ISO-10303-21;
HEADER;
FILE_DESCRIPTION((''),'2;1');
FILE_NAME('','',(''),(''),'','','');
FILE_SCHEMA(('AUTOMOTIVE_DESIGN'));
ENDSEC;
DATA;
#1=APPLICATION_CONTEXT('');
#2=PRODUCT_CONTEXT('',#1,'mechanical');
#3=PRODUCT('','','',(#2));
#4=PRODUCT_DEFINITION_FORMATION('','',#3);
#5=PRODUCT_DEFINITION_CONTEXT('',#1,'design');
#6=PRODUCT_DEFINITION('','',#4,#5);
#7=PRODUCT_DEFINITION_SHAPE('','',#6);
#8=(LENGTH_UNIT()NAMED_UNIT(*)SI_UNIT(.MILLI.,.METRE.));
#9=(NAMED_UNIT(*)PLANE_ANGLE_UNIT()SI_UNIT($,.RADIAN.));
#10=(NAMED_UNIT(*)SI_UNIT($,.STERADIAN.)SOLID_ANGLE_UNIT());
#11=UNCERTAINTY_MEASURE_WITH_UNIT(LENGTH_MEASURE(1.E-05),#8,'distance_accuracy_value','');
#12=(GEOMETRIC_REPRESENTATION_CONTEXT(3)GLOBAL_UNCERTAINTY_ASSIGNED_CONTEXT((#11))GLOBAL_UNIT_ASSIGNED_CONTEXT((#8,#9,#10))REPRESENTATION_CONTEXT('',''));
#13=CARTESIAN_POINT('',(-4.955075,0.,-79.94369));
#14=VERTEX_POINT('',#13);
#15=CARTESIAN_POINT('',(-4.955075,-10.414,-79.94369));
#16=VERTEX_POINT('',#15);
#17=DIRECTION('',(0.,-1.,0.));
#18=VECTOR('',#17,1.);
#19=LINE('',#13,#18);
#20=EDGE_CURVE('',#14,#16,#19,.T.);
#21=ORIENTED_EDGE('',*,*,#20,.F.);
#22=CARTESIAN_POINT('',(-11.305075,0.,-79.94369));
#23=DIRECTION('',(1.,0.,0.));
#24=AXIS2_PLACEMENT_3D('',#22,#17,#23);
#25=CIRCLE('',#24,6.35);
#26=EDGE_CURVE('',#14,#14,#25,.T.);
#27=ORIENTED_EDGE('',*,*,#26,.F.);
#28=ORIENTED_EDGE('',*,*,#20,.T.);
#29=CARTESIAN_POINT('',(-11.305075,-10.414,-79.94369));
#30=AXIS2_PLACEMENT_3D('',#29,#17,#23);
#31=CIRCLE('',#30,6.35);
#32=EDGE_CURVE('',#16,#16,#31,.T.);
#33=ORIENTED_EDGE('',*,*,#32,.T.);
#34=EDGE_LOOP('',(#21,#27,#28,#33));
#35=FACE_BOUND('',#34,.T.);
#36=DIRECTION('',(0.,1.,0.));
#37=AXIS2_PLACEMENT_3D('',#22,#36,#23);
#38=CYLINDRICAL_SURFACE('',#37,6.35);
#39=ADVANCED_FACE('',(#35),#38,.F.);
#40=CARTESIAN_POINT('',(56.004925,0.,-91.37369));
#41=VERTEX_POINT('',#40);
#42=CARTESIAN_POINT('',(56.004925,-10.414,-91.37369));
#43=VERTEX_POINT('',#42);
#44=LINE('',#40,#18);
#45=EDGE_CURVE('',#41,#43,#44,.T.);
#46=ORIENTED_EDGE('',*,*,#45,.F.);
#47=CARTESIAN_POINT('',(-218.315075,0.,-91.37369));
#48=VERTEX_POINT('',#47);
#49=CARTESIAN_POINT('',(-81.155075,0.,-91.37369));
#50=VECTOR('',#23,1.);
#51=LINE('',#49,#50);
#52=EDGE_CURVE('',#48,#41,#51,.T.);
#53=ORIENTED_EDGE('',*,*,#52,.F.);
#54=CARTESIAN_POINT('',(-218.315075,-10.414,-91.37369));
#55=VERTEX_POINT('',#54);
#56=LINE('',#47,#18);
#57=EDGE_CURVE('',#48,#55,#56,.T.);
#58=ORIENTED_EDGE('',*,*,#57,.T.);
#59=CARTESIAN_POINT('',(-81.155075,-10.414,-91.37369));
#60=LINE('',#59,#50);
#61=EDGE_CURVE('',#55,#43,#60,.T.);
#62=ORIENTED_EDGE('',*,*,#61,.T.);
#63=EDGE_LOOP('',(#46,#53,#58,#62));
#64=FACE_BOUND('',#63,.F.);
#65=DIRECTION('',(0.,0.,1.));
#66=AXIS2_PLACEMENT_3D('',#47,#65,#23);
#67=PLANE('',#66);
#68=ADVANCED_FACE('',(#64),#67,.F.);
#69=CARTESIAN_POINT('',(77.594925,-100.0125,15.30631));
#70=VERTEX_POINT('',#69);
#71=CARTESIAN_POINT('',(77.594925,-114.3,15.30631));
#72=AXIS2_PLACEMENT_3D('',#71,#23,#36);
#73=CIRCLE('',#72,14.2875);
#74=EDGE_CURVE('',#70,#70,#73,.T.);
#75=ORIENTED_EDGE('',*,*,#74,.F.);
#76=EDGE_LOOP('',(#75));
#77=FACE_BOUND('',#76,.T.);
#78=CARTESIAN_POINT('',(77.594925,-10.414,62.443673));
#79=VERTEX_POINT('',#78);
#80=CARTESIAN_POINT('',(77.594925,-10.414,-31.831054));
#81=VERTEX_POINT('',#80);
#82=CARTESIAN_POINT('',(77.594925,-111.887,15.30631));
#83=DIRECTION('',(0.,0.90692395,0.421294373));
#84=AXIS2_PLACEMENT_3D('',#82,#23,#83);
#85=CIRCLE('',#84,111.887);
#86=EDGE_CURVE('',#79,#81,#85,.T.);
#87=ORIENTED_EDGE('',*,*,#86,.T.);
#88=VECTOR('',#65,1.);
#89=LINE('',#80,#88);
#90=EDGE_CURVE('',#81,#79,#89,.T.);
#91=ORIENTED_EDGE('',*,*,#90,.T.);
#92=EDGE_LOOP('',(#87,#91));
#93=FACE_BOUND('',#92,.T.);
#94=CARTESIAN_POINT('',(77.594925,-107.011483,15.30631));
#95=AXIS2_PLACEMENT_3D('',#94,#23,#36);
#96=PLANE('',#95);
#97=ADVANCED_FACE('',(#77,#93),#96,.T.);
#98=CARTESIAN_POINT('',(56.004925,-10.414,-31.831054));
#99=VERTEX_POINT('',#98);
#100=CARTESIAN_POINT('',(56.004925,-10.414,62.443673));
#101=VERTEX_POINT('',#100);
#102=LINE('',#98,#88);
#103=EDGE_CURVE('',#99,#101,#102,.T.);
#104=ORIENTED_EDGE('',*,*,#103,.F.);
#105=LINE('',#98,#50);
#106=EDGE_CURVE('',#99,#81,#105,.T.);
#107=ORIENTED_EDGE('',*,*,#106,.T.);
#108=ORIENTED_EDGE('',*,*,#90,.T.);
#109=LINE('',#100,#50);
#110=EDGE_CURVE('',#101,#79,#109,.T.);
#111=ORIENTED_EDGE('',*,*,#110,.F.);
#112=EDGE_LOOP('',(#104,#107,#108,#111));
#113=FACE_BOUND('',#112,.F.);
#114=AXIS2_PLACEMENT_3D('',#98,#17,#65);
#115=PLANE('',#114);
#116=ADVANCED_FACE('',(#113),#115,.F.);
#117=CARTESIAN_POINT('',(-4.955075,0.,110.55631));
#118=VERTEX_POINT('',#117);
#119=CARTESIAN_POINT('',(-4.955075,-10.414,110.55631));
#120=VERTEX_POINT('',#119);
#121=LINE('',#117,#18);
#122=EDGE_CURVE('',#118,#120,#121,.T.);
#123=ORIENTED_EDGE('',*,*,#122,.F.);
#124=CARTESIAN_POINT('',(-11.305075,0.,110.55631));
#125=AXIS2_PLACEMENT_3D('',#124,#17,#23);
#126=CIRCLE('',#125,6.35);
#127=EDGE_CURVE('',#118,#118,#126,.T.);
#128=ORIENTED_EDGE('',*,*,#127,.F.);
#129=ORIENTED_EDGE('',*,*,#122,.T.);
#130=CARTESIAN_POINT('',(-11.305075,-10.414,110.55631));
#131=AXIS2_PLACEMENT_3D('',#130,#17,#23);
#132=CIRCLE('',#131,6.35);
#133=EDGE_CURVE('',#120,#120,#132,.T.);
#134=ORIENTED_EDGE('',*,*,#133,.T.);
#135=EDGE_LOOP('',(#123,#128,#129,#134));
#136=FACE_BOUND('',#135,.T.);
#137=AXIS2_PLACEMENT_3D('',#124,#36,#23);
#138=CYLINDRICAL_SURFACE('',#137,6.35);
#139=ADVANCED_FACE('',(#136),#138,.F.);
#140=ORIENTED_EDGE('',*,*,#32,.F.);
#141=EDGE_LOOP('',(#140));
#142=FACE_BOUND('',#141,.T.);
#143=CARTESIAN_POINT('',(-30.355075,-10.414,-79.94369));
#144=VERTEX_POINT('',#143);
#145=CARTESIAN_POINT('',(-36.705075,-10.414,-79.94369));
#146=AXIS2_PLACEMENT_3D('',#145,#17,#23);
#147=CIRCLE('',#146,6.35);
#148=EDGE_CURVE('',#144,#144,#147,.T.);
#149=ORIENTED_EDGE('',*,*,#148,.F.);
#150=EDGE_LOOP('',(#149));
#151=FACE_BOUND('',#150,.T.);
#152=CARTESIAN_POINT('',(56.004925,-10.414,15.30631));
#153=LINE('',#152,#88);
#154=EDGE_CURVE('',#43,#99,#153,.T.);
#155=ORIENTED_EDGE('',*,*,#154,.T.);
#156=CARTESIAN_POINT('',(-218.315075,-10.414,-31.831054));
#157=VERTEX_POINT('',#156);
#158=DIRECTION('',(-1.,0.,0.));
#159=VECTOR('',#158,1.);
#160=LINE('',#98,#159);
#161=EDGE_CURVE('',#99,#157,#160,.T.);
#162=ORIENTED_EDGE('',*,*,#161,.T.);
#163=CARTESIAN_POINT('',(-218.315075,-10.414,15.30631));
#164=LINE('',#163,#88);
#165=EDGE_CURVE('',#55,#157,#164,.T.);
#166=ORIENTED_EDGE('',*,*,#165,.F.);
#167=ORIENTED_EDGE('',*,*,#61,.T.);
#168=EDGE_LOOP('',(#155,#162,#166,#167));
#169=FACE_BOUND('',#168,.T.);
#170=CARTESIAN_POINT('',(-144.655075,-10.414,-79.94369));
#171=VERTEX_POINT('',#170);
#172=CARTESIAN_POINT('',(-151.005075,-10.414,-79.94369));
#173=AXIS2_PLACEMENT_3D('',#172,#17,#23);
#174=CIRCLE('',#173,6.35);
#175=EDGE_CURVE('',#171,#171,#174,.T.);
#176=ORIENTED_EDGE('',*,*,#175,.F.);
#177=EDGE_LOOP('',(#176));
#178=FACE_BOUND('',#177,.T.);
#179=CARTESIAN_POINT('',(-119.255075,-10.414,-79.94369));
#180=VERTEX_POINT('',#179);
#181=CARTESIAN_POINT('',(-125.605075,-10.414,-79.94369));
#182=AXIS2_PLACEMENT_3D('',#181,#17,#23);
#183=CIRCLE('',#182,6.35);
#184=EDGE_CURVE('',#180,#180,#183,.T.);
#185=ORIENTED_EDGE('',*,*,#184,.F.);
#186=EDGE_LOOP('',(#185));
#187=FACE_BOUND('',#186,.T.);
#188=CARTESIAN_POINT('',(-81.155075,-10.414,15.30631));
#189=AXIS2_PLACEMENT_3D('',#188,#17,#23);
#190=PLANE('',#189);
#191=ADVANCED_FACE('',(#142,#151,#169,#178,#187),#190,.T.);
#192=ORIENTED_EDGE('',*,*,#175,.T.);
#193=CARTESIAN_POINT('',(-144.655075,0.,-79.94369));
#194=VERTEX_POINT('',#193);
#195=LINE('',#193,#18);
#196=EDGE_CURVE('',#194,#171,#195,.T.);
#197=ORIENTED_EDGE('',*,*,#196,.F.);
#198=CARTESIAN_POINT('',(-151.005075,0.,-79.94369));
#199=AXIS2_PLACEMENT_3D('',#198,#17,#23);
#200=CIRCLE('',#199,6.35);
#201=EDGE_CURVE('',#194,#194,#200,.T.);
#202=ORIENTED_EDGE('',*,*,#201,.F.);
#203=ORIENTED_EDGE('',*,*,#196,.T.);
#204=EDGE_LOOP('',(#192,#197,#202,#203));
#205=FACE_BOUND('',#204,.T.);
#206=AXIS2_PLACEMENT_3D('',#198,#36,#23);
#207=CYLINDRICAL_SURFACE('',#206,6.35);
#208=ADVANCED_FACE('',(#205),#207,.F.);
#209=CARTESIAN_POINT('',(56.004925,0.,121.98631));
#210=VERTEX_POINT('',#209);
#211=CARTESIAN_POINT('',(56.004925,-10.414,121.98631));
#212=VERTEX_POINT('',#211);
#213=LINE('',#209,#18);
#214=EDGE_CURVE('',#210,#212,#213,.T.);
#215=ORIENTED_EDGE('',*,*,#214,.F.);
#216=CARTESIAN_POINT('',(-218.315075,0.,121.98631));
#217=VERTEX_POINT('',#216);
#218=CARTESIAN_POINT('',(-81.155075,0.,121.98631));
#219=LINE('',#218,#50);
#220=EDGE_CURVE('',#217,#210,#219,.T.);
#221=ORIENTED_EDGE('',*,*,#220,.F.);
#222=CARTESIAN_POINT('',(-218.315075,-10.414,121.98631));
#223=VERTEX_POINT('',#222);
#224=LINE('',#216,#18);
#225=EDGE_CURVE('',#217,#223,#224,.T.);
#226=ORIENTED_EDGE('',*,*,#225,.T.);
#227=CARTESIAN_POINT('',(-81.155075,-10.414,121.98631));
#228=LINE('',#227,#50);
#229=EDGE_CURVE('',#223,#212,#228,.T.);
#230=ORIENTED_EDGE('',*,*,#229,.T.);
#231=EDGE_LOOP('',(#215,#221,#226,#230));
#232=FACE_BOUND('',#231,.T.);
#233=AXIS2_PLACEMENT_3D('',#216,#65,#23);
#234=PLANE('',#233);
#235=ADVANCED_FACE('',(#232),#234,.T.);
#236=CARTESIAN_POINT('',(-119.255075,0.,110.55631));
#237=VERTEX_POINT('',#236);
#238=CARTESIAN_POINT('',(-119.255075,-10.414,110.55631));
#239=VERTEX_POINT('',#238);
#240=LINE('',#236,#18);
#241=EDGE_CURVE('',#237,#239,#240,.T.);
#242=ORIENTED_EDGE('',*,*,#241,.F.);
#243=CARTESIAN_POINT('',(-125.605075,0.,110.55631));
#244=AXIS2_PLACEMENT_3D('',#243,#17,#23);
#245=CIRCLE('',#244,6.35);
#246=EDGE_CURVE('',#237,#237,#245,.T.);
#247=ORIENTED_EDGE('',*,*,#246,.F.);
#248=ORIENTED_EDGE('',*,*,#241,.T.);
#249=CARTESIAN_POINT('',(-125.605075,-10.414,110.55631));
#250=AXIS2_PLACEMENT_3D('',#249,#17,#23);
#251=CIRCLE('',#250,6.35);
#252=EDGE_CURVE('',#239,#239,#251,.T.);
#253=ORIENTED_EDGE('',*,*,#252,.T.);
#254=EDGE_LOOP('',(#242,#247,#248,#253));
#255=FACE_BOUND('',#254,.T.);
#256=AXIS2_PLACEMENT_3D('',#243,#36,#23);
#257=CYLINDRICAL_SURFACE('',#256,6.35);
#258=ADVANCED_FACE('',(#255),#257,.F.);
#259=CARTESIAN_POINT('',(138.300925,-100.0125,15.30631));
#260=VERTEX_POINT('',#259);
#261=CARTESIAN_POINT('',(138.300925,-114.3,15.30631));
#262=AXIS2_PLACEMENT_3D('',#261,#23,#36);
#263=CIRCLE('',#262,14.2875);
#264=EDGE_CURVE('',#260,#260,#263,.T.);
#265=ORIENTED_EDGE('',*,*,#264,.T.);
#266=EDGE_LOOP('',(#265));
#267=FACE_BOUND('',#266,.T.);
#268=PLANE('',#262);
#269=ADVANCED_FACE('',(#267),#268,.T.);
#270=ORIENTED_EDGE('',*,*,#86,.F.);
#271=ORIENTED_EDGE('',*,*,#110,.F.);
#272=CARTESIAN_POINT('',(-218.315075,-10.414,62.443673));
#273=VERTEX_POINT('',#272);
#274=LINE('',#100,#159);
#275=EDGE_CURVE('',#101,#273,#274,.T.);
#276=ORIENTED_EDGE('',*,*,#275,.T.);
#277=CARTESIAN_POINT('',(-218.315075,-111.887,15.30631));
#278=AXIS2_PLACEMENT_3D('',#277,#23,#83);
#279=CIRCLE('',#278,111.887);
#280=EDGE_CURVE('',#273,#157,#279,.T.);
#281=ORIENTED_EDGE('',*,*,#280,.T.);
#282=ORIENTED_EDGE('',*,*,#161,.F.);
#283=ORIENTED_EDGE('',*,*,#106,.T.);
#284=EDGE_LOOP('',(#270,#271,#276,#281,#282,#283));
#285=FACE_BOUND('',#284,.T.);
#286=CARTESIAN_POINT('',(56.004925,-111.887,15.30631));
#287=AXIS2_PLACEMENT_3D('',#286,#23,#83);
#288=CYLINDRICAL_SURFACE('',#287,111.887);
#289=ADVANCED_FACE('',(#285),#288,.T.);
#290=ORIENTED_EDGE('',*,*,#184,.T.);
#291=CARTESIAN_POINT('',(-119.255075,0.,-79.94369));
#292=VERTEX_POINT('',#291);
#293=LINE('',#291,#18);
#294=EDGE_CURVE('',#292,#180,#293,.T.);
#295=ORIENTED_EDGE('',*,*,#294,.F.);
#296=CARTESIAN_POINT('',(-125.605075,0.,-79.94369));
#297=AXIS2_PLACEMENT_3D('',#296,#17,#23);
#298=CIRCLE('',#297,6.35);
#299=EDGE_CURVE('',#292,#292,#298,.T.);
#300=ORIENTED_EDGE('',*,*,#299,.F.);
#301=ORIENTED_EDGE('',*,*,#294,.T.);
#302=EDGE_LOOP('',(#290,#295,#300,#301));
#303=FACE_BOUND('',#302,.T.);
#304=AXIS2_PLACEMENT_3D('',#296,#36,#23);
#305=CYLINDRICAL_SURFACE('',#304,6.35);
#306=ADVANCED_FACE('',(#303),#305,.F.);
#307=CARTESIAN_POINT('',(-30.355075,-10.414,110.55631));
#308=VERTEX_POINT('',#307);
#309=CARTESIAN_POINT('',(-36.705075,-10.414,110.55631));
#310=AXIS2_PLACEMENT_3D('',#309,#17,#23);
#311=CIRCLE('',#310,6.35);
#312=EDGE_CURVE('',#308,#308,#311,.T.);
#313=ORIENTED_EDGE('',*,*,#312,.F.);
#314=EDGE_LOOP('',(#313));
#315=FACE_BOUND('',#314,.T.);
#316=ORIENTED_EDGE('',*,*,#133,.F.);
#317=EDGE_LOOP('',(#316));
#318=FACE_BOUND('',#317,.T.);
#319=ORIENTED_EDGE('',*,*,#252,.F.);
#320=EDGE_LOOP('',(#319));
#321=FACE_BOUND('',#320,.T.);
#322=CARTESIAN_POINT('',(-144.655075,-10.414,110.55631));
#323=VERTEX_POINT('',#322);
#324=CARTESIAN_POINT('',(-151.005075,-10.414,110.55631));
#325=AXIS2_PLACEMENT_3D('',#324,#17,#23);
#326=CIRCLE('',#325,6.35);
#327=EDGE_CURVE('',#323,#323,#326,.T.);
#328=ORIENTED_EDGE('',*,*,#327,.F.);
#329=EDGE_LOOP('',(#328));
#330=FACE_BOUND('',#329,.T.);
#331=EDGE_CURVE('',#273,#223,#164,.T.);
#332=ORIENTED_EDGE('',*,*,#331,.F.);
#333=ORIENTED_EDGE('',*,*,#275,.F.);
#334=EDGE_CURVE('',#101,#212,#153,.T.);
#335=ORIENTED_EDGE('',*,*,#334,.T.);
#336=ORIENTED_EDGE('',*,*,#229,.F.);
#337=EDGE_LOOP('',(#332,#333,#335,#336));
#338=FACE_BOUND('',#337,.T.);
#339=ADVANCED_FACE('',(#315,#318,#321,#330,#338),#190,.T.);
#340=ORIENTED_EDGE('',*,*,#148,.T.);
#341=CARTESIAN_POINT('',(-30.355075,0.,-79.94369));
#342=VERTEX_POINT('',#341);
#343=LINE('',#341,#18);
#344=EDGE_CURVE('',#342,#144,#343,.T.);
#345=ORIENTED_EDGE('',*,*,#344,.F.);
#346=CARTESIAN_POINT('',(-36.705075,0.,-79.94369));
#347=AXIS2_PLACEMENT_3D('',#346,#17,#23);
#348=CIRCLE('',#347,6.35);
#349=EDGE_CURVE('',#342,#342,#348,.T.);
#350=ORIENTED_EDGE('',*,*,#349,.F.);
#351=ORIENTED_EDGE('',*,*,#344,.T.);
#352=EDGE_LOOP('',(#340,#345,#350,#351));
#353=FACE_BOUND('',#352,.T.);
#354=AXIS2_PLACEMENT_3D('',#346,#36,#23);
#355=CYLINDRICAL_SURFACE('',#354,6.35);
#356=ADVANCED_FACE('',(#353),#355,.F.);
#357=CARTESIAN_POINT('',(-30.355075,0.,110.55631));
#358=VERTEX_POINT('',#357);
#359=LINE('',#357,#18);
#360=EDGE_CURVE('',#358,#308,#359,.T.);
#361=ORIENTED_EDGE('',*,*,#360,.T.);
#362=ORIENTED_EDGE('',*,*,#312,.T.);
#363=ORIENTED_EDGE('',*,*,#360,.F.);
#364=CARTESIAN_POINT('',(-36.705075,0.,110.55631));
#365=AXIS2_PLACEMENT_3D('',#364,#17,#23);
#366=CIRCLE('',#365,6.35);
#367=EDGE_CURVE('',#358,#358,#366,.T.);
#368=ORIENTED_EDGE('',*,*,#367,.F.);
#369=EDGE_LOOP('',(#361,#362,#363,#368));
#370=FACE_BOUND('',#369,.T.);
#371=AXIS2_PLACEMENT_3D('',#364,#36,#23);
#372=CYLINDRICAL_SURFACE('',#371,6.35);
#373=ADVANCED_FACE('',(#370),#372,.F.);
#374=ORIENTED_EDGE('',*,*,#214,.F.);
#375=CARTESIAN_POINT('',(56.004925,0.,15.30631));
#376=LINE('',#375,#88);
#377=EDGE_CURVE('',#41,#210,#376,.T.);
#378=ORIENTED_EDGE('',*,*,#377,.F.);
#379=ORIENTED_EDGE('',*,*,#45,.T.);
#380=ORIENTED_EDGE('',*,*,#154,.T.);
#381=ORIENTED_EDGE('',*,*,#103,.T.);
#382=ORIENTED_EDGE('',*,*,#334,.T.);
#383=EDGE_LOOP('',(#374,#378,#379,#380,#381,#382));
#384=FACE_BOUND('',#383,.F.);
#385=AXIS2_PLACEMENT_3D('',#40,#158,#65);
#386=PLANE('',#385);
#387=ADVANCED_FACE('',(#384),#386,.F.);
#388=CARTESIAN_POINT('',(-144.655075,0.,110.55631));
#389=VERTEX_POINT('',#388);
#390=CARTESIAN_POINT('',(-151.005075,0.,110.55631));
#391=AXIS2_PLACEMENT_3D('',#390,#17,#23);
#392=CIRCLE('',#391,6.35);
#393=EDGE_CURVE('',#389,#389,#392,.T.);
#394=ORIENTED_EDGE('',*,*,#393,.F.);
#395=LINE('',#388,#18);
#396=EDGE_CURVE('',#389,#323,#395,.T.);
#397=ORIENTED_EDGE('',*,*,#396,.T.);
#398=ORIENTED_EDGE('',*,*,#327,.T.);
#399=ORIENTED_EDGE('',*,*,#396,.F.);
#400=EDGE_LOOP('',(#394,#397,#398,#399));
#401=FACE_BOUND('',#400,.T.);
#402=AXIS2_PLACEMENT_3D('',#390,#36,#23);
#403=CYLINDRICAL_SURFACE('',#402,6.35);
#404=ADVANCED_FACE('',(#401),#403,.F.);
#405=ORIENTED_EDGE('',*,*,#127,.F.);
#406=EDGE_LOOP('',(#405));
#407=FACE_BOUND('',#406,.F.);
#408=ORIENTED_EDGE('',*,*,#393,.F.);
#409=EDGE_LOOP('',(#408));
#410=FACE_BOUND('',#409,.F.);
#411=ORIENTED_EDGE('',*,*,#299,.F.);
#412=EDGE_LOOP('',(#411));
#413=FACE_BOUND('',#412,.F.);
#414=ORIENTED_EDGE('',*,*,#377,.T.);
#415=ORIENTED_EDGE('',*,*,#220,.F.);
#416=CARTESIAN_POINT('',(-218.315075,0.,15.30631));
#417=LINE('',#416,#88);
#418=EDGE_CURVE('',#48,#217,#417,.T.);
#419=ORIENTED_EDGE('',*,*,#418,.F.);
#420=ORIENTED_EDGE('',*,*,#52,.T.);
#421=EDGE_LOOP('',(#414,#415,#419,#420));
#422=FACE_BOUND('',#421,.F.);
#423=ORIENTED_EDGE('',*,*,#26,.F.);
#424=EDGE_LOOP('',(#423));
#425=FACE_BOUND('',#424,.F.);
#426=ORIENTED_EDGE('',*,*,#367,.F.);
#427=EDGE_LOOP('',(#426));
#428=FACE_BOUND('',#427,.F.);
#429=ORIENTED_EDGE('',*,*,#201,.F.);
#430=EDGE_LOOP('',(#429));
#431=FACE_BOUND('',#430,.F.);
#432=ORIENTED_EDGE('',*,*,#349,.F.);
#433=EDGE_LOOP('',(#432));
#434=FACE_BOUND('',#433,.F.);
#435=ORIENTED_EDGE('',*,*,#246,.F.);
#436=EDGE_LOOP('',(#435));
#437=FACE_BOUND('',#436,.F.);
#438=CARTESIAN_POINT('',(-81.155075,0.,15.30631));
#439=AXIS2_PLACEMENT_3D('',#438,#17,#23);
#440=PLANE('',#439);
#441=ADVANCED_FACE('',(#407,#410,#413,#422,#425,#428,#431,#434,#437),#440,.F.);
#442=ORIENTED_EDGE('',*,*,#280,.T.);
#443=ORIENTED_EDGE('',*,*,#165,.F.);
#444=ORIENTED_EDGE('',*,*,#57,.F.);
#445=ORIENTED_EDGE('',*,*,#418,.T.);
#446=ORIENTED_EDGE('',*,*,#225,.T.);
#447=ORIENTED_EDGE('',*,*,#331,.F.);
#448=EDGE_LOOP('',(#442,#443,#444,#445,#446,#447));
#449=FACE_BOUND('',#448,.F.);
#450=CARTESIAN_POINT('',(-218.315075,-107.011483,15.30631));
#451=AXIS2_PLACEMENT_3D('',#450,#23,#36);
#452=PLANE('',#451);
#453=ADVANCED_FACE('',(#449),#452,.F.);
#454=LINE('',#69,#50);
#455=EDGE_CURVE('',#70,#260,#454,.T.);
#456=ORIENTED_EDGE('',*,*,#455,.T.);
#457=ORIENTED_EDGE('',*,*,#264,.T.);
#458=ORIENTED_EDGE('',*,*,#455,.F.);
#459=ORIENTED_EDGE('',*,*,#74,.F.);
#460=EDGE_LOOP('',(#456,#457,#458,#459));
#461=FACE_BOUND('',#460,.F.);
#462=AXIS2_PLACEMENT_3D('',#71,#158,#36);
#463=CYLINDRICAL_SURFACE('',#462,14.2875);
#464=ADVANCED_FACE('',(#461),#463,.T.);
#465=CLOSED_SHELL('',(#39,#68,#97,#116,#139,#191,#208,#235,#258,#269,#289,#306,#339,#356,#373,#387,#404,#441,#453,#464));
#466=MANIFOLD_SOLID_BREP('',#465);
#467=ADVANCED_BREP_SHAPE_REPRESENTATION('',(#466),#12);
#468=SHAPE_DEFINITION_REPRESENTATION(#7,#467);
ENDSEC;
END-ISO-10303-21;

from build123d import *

# Parameters (mm, degrees)
F0_W          = 274.32
F0_H          = 213.36
F0_R          = 6.35
F1_DEPTH      = 10.414
F3_DEPTH      = 21.59
F3_DEPTH_BACK = 274.32
F4_R          = 14.2875
F5_DEPTH      = 60.706


with BuildPart() as f1:
    # F0 (on Front) → F1 (new body)
    with BuildSketch(Plane.XZ):
        with Locations((-81.1550752527, 15.3063097969)):
            Rectangle(F0_W, F0_H)
        with Locations((-151.0050752527, -79.9436902031)):
            Circle(F0_R, mode=Mode.SUBTRACT)
        with Locations((-125.6050752527, -79.9436902031)):
            Circle(F0_R, mode=Mode.SUBTRACT)
        with Locations((-36.7050752527, -79.9436902031)):
            Circle(F0_R, mode=Mode.SUBTRACT)
        with Locations((-11.3050752527, -79.9436902031)):
            Circle(F0_R, mode=Mode.SUBTRACT)
        with Locations((-151.0050752527, 110.5563097969)):
            Circle(F0_R, mode=Mode.SUBTRACT)
        with Locations((-125.6050752527, 110.5563097969)):
            Circle(F0_R, mode=Mode.SUBTRACT)
        with Locations((-36.7050752527, 110.5563097969)):
            Circle(F0_R, mode=Mode.SUBTRACT)
        with Locations((-11.3050752527, 110.5563097969)):
            Circle(F0_R, mode=Mode.SUBTRACT)
    extrude(amount=F1_DEPTH)

    # F2 (on face) → F3 (join, two sides)
    with BuildSketch(Plane.YZ.offset(56.0049247473)) as f3_sk:
        with BuildLine():
            Line((-10.414, -31.8310537272), (-10.414, 62.4436733209))
            ThreePointArc((-10.414, 62.4436733209), (-223.774, 15.3063097969), (-10.414, -31.8310537272))
        make_face()
    extrude(amount=F3_DEPTH)
    extrude(f3_sk.sketch, amount=-F3_DEPTH_BACK)

    # F4 (on face) → F5 (join)
    with BuildSketch(Plane.YZ.offset(77.5949247473)):
        with Locations((-114.3, 15.3063097969)):
            Circle(F4_R)
    extrude(amount=F5_DEPTH)


solid = f1.part
